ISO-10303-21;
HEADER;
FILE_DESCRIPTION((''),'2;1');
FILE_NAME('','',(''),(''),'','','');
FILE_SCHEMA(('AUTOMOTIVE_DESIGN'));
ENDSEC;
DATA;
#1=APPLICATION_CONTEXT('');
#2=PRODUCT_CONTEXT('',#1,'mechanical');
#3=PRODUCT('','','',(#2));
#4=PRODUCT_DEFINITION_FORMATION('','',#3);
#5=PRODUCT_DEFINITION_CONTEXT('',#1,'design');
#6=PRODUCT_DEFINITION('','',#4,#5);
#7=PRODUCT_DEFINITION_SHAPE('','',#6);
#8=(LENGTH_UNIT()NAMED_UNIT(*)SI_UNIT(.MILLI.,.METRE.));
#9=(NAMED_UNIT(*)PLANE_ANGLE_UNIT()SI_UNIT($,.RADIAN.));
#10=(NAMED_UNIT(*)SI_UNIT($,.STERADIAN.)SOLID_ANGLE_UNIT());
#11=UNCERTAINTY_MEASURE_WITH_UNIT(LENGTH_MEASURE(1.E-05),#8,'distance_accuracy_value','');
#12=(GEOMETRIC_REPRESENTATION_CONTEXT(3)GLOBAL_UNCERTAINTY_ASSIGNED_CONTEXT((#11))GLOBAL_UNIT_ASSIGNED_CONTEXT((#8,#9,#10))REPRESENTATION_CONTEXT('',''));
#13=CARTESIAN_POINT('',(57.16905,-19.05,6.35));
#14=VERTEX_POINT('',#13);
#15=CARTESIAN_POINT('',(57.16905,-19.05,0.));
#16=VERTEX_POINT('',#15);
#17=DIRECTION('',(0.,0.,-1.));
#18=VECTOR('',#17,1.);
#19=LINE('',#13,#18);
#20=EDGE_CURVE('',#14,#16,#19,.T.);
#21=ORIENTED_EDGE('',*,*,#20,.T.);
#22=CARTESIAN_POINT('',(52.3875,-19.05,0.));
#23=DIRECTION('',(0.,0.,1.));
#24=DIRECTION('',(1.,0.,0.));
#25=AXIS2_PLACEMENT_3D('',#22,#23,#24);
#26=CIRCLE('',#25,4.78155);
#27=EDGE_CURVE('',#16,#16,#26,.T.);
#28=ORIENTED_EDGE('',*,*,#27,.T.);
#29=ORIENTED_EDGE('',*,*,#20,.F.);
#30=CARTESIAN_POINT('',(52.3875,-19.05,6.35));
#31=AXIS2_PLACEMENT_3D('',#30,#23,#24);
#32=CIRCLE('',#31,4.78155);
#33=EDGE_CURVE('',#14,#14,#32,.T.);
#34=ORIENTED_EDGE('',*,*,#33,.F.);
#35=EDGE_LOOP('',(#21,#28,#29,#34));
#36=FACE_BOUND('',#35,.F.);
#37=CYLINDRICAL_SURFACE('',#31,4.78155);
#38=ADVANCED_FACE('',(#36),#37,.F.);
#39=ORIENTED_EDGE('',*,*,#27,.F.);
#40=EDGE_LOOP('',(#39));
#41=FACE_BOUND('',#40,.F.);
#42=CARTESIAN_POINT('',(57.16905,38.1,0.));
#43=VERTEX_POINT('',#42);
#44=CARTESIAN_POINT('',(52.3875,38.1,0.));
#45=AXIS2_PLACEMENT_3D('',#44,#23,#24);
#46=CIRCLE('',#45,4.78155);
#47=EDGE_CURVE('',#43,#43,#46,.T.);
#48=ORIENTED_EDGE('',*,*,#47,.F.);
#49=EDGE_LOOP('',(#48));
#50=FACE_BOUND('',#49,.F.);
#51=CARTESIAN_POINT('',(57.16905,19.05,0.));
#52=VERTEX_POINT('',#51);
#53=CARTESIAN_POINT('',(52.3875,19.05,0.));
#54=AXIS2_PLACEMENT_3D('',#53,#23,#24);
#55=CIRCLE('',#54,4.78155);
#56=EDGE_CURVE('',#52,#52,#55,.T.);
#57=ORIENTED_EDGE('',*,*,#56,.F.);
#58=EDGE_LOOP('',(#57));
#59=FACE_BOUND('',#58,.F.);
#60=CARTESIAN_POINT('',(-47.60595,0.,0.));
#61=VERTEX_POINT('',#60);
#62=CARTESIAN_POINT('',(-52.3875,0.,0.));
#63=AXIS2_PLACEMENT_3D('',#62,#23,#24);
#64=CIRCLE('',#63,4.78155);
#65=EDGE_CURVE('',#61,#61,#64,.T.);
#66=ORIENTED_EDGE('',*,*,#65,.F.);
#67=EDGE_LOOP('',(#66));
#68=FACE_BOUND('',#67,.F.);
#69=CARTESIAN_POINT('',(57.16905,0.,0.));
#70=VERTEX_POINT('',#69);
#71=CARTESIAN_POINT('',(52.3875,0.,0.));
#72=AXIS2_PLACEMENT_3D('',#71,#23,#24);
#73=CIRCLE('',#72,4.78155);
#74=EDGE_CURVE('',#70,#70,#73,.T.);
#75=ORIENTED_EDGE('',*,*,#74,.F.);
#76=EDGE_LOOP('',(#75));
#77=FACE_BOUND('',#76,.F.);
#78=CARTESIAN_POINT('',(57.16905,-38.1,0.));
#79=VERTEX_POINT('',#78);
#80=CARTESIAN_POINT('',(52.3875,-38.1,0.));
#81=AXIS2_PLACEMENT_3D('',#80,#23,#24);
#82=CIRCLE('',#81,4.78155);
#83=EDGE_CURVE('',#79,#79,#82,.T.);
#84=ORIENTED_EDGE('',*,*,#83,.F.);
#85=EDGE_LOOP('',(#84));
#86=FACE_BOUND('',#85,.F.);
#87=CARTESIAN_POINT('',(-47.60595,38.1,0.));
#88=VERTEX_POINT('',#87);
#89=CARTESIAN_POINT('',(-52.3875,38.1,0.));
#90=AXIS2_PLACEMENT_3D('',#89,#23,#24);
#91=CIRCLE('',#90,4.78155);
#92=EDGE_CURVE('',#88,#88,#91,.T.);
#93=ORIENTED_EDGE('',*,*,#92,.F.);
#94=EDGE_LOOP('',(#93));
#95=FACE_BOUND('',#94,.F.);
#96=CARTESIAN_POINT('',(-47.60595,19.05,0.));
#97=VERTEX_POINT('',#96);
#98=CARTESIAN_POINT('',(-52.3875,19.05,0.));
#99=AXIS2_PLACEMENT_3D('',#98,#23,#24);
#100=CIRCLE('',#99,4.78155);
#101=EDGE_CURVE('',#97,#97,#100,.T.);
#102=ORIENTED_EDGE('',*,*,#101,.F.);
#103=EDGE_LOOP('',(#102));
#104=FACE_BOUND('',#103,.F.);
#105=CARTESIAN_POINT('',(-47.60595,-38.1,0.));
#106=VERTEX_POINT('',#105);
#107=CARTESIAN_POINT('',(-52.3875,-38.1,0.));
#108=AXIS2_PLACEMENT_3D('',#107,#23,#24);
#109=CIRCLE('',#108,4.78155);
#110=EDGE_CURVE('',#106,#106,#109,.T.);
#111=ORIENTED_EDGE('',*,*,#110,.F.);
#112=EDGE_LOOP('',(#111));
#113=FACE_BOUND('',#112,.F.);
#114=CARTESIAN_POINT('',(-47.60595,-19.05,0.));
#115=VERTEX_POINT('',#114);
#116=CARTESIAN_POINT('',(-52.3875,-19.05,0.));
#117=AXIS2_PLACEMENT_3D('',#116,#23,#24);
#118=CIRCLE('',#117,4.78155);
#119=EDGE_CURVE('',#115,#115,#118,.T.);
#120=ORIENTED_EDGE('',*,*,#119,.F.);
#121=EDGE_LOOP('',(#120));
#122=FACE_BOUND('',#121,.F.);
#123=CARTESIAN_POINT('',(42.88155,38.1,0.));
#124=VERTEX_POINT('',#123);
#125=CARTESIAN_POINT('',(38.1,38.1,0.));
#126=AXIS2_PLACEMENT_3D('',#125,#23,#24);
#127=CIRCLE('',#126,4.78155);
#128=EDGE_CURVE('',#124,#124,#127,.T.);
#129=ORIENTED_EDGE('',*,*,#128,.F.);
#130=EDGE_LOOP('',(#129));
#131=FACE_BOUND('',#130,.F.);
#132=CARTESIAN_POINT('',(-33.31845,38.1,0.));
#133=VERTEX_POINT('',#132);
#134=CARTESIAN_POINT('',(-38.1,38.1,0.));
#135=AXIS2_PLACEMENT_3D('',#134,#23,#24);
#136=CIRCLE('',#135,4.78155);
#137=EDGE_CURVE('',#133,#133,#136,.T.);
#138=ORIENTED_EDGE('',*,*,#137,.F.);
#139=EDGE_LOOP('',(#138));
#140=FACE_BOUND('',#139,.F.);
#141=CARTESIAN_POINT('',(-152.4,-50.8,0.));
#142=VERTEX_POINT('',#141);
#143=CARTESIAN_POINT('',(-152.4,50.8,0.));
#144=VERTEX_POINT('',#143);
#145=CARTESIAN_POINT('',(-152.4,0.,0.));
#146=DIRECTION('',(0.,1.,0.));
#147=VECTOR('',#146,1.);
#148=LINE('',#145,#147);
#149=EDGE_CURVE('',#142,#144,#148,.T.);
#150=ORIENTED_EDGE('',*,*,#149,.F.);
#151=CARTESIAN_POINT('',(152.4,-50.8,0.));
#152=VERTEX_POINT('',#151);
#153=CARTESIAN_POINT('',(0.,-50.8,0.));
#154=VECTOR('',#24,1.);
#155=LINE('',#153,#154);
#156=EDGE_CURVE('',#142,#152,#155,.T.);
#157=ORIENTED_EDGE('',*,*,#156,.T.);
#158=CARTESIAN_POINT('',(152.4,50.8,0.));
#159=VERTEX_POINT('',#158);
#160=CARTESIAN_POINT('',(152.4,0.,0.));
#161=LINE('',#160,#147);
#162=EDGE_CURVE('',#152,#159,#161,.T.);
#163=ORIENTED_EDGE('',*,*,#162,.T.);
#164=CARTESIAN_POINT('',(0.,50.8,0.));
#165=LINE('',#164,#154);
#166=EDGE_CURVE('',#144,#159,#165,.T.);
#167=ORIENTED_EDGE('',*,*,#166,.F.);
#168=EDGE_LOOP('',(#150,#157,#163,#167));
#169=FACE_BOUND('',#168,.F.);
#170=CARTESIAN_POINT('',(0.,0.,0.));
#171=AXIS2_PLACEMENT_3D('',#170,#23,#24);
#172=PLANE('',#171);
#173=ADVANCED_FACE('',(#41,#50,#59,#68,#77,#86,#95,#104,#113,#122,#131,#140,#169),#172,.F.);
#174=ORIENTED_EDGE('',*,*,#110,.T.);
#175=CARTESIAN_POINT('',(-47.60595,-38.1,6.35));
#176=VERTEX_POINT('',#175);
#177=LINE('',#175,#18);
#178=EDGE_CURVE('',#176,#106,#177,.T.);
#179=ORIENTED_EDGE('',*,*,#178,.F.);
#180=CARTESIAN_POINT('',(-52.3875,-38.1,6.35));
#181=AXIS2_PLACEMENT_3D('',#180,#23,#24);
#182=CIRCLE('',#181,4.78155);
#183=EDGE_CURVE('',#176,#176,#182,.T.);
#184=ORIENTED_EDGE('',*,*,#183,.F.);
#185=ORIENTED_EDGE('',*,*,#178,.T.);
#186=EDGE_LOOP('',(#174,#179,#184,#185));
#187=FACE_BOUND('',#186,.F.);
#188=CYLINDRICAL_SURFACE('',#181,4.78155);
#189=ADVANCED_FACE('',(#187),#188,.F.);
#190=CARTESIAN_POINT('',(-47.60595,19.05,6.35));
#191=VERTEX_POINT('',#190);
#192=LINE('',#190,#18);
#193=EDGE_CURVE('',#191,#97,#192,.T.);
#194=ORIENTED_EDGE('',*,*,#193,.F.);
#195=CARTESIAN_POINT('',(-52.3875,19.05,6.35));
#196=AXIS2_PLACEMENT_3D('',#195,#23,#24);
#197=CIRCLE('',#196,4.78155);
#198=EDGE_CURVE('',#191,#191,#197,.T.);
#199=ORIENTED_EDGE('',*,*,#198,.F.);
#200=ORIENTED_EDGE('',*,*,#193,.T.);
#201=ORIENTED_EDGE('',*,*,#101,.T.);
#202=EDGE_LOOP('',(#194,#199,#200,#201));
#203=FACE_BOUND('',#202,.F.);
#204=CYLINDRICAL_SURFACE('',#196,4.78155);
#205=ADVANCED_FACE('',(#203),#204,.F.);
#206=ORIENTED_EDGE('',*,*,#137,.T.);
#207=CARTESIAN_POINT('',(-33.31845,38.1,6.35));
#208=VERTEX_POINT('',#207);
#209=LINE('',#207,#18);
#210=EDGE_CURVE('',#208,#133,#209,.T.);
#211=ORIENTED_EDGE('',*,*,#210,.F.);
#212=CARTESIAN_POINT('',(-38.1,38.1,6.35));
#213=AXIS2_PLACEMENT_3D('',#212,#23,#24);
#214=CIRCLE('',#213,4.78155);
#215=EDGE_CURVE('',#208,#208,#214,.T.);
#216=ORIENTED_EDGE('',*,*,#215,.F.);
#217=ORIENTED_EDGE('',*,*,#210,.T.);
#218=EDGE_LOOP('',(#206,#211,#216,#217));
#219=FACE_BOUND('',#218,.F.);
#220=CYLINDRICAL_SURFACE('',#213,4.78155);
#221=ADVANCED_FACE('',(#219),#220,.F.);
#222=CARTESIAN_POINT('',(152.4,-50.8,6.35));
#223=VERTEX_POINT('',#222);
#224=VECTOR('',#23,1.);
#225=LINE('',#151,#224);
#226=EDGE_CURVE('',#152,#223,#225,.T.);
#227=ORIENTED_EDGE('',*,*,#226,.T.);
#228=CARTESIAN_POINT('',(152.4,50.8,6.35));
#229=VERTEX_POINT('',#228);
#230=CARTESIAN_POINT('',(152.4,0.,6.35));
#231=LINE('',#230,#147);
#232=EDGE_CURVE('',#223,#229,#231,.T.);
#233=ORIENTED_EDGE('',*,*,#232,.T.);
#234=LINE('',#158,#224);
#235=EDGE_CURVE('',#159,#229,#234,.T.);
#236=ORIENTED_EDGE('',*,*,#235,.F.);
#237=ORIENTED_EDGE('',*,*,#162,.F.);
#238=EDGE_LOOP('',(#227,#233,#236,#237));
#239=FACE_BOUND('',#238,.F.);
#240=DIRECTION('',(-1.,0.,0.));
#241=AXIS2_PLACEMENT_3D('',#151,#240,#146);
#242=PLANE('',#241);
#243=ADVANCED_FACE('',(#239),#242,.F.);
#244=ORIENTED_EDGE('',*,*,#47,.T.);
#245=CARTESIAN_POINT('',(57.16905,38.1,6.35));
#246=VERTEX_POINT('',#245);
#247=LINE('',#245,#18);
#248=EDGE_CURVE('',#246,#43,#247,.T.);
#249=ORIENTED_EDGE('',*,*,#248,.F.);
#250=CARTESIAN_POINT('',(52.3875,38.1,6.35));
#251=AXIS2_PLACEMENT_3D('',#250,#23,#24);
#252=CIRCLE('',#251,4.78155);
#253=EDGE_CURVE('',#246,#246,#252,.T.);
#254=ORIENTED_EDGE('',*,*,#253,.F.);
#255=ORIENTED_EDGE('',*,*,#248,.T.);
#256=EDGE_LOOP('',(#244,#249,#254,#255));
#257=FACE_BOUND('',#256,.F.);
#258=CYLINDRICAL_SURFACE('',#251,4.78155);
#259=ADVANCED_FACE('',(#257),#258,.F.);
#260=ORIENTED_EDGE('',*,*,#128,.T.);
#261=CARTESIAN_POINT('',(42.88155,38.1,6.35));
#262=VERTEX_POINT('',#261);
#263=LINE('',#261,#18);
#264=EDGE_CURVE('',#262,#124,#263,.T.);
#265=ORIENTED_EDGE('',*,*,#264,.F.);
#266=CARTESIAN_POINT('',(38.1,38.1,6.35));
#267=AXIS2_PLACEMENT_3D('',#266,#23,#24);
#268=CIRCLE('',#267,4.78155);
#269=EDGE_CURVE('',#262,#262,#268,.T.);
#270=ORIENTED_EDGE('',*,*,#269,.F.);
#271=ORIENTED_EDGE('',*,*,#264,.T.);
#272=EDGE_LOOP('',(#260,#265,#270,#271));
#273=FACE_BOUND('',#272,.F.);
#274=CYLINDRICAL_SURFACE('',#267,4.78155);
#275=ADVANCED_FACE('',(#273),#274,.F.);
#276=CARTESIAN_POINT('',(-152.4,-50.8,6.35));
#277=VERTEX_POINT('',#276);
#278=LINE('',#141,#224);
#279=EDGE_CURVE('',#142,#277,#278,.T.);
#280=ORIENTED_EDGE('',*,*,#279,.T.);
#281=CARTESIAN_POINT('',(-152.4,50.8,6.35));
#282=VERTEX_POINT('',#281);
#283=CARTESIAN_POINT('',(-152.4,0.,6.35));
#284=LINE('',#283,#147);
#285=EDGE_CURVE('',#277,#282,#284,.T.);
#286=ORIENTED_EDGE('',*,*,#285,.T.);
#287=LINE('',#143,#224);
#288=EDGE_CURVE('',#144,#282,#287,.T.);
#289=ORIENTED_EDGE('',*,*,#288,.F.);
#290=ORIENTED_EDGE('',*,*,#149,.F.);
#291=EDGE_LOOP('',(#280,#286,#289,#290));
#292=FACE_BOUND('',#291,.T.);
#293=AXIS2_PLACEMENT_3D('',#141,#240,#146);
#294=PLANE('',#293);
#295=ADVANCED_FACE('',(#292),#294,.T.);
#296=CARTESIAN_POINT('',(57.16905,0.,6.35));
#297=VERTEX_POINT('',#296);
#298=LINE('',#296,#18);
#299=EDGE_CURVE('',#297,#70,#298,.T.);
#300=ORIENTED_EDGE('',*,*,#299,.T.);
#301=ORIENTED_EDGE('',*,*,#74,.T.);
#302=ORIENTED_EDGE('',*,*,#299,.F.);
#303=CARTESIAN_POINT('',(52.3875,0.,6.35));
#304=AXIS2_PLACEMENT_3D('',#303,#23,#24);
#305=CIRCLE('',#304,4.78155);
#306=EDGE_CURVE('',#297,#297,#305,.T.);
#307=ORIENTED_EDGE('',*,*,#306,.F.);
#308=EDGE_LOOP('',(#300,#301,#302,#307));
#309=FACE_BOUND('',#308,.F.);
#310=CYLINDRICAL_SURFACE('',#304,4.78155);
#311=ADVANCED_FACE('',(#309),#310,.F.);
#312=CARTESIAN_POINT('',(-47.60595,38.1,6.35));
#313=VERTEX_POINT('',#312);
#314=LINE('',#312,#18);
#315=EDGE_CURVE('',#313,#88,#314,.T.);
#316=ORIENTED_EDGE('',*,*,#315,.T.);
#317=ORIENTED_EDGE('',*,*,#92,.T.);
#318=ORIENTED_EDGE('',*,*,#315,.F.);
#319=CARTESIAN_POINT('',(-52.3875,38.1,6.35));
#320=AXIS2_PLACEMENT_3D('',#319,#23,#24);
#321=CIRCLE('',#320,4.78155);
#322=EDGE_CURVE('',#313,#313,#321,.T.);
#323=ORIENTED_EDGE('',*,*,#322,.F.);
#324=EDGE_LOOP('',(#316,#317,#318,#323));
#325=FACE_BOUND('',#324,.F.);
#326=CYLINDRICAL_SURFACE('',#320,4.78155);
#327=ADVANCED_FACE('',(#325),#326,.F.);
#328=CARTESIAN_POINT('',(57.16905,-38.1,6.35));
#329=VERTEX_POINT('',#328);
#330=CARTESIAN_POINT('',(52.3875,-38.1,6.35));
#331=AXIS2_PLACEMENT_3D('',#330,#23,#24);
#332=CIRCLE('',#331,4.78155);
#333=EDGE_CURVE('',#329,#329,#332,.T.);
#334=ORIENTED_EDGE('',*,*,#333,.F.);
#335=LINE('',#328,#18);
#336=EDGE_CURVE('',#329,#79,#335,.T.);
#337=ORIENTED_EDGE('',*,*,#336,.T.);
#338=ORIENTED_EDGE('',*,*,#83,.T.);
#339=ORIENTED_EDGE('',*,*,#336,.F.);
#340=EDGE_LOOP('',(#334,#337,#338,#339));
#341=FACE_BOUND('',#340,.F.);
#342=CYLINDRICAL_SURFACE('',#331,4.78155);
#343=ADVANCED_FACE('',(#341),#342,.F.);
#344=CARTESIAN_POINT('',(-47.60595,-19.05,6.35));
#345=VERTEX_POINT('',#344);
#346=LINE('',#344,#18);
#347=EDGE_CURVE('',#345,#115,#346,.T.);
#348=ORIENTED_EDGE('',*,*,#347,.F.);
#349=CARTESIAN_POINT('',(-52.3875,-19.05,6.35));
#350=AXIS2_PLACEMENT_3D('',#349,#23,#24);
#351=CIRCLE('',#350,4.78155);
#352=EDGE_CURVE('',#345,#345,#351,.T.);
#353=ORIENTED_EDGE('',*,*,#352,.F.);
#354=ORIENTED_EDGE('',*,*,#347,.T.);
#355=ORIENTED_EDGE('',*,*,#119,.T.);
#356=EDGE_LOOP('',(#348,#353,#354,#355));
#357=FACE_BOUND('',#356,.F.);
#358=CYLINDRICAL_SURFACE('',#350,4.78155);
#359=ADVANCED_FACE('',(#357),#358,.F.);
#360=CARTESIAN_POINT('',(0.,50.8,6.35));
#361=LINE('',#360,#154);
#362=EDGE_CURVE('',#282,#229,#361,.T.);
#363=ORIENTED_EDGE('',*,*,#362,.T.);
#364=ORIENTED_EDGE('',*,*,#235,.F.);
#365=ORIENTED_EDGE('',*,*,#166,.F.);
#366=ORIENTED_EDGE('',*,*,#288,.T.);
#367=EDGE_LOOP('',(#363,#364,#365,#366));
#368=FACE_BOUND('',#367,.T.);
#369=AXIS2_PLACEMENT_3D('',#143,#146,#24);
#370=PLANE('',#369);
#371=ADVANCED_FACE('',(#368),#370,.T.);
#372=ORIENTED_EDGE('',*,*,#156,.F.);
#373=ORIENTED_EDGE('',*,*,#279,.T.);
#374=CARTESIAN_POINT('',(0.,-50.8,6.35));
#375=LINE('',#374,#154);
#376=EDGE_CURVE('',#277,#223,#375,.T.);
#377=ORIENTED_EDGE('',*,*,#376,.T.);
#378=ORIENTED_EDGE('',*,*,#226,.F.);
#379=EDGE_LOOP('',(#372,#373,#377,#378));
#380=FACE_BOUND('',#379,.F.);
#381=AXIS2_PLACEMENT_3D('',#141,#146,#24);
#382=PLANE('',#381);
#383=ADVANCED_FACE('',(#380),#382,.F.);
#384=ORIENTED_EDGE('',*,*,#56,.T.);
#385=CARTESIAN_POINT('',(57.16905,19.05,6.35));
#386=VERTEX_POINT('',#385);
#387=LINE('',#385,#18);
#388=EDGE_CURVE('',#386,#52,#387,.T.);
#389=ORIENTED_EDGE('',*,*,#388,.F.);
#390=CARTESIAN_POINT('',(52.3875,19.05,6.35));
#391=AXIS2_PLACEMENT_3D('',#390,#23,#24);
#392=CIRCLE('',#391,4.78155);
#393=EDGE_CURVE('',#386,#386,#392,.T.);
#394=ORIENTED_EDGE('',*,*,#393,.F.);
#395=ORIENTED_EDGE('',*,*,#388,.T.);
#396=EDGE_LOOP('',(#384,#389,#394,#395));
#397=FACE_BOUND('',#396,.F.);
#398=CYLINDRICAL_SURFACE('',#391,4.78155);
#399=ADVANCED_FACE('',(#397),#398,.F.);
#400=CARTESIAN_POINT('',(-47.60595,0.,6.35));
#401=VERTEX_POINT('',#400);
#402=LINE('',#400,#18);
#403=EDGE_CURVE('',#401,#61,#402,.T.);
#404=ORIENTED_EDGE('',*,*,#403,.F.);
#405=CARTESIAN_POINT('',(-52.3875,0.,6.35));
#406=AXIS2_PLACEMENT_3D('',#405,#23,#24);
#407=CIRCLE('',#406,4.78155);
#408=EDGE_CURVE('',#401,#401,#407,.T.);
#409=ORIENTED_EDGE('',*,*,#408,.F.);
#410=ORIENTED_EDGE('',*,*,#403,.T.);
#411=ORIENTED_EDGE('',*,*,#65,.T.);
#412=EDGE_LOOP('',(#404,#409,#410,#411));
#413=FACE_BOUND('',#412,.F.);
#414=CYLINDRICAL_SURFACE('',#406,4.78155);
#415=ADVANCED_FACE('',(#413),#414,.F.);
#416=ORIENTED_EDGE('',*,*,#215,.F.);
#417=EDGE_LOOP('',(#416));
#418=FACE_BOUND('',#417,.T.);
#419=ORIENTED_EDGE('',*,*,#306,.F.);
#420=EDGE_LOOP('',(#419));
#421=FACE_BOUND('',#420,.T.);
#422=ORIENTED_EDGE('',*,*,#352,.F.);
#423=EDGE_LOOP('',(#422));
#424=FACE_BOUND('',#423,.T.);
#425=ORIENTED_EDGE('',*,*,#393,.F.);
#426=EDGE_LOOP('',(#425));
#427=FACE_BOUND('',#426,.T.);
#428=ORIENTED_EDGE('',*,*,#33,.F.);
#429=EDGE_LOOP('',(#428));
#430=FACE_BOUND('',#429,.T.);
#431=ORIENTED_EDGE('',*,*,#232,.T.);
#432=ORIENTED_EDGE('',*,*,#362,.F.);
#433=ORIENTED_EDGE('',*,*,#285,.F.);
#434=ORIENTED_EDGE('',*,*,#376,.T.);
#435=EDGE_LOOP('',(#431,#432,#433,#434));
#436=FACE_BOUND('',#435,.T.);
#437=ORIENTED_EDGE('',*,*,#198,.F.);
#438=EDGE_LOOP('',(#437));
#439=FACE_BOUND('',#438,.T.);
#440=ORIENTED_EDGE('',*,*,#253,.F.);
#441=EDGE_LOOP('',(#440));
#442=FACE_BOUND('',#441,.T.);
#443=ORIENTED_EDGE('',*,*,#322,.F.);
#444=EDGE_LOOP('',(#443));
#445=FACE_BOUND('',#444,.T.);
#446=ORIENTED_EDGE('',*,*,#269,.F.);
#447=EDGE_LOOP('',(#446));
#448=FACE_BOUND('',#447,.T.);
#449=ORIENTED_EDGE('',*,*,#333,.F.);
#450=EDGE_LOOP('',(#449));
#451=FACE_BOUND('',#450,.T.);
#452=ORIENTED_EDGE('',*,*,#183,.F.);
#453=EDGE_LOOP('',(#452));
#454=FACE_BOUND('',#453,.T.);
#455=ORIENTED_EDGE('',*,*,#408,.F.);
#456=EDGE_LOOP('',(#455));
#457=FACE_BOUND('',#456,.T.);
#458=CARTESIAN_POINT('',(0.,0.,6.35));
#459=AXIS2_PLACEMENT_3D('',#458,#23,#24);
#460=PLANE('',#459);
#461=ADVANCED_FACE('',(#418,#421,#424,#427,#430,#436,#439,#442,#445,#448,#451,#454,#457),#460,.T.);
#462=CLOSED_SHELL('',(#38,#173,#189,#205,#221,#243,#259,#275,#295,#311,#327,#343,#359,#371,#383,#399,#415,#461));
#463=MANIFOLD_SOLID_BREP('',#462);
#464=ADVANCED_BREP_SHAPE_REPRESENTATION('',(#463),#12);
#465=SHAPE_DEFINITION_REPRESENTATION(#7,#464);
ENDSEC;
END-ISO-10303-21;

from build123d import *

# Parameters (mm, degrees)
F0_W     = 304.8
F0_H     = 101.6
F1_DEPTH = 6.35
F2_R     = 4.78155
F3_DEPTH = 6.35
F4_R     = 4.78155
F5_DEPTH = 6.351


# Not quite as in the source:
# - a feature names something its author has since deleted; it is built from what else it names


with BuildPart() as f1:
    # F0 (on Top) → F1 (new body)
    with BuildSketch(Plane.XY):
        Rectangle(F0_W, F0_H)
    extrude(amount=F1_DEPTH)

    # F2 (on face) → F3 (cut, through all)
    with BuildSketch(Plane.XY.offset(6.35)):
        with Locations((-52.3875, 38.1)):
            Circle(F2_R)
        with Locations((52.3875, 38.1)):
            Circle(F2_R)
        with Locations((-52.3875, 19.05)):
            Circle(F2_R)
        with Locations((52.3875, 19.05)):
            Circle(F2_R)
        with Locations((-52.3875, 0)):
            Circle(F2_R)
        with Locations((-52.3875, -19.05)):
            Circle(F2_R)
        with Locations((-52.3875, -38.1)):
            Circle(F2_R)
        with Locations((52.3875, 0)):
            Circle(F2_R)
        with Locations((52.3875, -19.05)):
            Circle(F2_R)
        with Locations((52.3875, -38.1)):
            Circle(F2_R)
    extrude(amount=-F3_DEPTH, mode=Mode.SUBTRACT)

    # F4 (on face) → F5 (cut, through all)
    with BuildSketch(Plane.XY.offset(6.35)):
        with Locations((-38.1, 38.1)):
            Circle(F4_R)
        with Locations((38.1, 38.1)):
            Circle(F4_R)
    extrude(amount=-F5_DEPTH, mode=Mode.SUBTRACT)


solid = f1.part
